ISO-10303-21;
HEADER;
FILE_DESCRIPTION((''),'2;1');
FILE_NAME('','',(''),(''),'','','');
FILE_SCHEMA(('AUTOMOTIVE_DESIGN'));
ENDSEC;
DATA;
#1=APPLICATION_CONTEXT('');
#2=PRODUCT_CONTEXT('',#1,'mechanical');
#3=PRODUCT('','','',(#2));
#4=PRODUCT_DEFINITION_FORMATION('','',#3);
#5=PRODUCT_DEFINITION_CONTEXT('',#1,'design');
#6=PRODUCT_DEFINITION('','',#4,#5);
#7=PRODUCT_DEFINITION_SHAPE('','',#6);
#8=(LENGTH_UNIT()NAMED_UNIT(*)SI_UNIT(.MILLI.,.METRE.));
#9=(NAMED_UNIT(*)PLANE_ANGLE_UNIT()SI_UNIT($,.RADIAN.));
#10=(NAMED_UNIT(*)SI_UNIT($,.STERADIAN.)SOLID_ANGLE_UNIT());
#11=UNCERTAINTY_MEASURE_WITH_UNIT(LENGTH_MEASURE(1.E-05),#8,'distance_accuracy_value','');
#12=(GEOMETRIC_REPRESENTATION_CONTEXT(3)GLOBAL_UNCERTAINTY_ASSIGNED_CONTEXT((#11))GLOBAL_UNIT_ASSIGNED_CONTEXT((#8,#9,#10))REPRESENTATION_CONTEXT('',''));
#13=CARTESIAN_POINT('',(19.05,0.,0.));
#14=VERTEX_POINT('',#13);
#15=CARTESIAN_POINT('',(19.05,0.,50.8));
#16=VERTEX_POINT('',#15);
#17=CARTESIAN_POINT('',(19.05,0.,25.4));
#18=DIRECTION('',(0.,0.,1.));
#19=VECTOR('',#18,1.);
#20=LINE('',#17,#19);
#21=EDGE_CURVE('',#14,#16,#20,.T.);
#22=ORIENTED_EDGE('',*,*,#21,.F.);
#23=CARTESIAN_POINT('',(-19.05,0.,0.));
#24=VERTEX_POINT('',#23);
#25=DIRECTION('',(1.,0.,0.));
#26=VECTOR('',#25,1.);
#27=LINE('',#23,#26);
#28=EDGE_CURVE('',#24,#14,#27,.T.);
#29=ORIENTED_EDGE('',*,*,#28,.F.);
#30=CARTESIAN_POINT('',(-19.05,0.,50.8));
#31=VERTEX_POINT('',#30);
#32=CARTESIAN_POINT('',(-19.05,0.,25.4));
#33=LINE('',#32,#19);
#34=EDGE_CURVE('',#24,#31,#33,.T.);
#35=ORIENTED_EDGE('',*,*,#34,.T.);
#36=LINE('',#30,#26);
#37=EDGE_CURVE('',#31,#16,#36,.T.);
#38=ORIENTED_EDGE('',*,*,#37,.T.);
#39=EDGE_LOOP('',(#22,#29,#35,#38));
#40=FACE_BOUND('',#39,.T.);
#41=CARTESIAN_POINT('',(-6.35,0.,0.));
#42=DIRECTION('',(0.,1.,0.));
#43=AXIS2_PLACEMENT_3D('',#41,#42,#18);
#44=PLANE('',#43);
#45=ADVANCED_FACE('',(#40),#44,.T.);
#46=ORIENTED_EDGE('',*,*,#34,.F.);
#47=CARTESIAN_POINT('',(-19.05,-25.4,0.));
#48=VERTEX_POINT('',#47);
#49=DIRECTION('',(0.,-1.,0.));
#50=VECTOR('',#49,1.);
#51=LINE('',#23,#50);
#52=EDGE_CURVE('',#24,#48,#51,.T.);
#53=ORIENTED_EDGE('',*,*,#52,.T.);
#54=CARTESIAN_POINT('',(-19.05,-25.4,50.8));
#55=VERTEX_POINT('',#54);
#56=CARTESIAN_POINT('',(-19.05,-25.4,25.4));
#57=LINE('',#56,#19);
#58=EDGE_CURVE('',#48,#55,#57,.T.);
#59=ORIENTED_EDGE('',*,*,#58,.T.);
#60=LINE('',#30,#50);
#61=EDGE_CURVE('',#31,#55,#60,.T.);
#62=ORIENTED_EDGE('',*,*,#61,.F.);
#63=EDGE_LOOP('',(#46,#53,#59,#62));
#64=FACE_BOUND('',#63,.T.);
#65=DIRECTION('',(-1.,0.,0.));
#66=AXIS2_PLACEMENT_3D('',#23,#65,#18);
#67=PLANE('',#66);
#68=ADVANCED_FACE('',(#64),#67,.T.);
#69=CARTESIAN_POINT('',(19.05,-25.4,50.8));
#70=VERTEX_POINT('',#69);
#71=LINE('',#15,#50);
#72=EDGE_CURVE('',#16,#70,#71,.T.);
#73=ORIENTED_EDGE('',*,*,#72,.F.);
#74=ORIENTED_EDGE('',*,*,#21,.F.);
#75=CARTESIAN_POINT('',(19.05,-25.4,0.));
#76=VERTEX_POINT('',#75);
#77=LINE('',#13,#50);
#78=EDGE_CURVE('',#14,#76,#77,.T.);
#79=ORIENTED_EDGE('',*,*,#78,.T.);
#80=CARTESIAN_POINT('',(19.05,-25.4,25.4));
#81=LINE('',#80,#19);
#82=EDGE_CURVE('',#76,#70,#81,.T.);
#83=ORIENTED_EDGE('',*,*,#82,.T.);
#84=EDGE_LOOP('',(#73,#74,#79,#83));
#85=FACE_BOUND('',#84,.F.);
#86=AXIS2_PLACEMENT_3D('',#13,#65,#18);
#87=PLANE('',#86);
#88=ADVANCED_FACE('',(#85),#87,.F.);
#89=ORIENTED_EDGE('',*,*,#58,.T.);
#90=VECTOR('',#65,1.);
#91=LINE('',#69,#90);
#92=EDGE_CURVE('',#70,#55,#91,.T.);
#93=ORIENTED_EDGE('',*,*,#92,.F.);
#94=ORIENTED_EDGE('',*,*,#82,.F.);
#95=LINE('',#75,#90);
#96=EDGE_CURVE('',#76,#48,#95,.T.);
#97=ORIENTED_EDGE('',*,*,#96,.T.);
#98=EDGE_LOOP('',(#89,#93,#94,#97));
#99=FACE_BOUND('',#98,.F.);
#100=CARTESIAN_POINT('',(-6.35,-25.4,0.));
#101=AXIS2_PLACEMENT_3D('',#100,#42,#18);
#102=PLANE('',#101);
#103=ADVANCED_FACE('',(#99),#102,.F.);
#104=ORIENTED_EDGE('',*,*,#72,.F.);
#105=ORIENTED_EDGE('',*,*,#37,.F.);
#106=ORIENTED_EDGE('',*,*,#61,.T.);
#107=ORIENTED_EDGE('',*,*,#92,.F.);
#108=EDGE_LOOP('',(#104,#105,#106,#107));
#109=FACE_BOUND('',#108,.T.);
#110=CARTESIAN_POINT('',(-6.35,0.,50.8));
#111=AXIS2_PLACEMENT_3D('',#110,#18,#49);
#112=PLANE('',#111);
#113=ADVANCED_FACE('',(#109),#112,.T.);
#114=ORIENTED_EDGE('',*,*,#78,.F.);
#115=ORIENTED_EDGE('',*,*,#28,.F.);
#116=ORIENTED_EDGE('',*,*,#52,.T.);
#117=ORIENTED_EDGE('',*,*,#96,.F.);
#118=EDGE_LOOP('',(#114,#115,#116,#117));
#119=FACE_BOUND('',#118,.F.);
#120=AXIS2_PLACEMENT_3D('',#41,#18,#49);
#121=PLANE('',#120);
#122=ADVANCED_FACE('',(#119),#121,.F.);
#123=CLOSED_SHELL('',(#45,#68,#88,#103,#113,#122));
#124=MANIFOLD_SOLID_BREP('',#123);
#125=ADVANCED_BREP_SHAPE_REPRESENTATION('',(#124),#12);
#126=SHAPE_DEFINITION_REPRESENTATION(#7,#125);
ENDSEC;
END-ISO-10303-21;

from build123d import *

# Parameters (mm, degrees)
F0_W     = 25.4
F0_H     = 50.8
F1_DEPTH = 25.4
F2_ANGLE = 90
F3_DEPTH = 12.7


# Not quite as in the source:
# - the program builds the solid bodies; features that only make, move or delete a surface that nothing else refers to are left out


with BuildPart() as f1:
    # F0 (on Top) → F1 (new body)
    with BuildSketch(Plane.XY):
        with Locations((12.7, 25.4)):
            Rectangle(F0_W, F0_H)
    extrude(amount=F1_DEPTH)


with BuildPart() as f1_1:
    # F2: moved
    add(f1.part.rotate(Axis((12.7, 0, 0), (1, 0, 0)), F2_ANGLE))

    # F3 (add): a face of the model
    f3_faces = [f1_1.faces().sort_by_distance(p)[0] for p in [
        (0, -12.7, 25.4),
    ]]
    extrude(f3_faces, amount=F3_DEPTH)


with BuildPart() as f1_2:
    # F5: moved
    add(f1_1.part.moved(Location((-6.35, 0, 0))))


solid = f1_2.part
